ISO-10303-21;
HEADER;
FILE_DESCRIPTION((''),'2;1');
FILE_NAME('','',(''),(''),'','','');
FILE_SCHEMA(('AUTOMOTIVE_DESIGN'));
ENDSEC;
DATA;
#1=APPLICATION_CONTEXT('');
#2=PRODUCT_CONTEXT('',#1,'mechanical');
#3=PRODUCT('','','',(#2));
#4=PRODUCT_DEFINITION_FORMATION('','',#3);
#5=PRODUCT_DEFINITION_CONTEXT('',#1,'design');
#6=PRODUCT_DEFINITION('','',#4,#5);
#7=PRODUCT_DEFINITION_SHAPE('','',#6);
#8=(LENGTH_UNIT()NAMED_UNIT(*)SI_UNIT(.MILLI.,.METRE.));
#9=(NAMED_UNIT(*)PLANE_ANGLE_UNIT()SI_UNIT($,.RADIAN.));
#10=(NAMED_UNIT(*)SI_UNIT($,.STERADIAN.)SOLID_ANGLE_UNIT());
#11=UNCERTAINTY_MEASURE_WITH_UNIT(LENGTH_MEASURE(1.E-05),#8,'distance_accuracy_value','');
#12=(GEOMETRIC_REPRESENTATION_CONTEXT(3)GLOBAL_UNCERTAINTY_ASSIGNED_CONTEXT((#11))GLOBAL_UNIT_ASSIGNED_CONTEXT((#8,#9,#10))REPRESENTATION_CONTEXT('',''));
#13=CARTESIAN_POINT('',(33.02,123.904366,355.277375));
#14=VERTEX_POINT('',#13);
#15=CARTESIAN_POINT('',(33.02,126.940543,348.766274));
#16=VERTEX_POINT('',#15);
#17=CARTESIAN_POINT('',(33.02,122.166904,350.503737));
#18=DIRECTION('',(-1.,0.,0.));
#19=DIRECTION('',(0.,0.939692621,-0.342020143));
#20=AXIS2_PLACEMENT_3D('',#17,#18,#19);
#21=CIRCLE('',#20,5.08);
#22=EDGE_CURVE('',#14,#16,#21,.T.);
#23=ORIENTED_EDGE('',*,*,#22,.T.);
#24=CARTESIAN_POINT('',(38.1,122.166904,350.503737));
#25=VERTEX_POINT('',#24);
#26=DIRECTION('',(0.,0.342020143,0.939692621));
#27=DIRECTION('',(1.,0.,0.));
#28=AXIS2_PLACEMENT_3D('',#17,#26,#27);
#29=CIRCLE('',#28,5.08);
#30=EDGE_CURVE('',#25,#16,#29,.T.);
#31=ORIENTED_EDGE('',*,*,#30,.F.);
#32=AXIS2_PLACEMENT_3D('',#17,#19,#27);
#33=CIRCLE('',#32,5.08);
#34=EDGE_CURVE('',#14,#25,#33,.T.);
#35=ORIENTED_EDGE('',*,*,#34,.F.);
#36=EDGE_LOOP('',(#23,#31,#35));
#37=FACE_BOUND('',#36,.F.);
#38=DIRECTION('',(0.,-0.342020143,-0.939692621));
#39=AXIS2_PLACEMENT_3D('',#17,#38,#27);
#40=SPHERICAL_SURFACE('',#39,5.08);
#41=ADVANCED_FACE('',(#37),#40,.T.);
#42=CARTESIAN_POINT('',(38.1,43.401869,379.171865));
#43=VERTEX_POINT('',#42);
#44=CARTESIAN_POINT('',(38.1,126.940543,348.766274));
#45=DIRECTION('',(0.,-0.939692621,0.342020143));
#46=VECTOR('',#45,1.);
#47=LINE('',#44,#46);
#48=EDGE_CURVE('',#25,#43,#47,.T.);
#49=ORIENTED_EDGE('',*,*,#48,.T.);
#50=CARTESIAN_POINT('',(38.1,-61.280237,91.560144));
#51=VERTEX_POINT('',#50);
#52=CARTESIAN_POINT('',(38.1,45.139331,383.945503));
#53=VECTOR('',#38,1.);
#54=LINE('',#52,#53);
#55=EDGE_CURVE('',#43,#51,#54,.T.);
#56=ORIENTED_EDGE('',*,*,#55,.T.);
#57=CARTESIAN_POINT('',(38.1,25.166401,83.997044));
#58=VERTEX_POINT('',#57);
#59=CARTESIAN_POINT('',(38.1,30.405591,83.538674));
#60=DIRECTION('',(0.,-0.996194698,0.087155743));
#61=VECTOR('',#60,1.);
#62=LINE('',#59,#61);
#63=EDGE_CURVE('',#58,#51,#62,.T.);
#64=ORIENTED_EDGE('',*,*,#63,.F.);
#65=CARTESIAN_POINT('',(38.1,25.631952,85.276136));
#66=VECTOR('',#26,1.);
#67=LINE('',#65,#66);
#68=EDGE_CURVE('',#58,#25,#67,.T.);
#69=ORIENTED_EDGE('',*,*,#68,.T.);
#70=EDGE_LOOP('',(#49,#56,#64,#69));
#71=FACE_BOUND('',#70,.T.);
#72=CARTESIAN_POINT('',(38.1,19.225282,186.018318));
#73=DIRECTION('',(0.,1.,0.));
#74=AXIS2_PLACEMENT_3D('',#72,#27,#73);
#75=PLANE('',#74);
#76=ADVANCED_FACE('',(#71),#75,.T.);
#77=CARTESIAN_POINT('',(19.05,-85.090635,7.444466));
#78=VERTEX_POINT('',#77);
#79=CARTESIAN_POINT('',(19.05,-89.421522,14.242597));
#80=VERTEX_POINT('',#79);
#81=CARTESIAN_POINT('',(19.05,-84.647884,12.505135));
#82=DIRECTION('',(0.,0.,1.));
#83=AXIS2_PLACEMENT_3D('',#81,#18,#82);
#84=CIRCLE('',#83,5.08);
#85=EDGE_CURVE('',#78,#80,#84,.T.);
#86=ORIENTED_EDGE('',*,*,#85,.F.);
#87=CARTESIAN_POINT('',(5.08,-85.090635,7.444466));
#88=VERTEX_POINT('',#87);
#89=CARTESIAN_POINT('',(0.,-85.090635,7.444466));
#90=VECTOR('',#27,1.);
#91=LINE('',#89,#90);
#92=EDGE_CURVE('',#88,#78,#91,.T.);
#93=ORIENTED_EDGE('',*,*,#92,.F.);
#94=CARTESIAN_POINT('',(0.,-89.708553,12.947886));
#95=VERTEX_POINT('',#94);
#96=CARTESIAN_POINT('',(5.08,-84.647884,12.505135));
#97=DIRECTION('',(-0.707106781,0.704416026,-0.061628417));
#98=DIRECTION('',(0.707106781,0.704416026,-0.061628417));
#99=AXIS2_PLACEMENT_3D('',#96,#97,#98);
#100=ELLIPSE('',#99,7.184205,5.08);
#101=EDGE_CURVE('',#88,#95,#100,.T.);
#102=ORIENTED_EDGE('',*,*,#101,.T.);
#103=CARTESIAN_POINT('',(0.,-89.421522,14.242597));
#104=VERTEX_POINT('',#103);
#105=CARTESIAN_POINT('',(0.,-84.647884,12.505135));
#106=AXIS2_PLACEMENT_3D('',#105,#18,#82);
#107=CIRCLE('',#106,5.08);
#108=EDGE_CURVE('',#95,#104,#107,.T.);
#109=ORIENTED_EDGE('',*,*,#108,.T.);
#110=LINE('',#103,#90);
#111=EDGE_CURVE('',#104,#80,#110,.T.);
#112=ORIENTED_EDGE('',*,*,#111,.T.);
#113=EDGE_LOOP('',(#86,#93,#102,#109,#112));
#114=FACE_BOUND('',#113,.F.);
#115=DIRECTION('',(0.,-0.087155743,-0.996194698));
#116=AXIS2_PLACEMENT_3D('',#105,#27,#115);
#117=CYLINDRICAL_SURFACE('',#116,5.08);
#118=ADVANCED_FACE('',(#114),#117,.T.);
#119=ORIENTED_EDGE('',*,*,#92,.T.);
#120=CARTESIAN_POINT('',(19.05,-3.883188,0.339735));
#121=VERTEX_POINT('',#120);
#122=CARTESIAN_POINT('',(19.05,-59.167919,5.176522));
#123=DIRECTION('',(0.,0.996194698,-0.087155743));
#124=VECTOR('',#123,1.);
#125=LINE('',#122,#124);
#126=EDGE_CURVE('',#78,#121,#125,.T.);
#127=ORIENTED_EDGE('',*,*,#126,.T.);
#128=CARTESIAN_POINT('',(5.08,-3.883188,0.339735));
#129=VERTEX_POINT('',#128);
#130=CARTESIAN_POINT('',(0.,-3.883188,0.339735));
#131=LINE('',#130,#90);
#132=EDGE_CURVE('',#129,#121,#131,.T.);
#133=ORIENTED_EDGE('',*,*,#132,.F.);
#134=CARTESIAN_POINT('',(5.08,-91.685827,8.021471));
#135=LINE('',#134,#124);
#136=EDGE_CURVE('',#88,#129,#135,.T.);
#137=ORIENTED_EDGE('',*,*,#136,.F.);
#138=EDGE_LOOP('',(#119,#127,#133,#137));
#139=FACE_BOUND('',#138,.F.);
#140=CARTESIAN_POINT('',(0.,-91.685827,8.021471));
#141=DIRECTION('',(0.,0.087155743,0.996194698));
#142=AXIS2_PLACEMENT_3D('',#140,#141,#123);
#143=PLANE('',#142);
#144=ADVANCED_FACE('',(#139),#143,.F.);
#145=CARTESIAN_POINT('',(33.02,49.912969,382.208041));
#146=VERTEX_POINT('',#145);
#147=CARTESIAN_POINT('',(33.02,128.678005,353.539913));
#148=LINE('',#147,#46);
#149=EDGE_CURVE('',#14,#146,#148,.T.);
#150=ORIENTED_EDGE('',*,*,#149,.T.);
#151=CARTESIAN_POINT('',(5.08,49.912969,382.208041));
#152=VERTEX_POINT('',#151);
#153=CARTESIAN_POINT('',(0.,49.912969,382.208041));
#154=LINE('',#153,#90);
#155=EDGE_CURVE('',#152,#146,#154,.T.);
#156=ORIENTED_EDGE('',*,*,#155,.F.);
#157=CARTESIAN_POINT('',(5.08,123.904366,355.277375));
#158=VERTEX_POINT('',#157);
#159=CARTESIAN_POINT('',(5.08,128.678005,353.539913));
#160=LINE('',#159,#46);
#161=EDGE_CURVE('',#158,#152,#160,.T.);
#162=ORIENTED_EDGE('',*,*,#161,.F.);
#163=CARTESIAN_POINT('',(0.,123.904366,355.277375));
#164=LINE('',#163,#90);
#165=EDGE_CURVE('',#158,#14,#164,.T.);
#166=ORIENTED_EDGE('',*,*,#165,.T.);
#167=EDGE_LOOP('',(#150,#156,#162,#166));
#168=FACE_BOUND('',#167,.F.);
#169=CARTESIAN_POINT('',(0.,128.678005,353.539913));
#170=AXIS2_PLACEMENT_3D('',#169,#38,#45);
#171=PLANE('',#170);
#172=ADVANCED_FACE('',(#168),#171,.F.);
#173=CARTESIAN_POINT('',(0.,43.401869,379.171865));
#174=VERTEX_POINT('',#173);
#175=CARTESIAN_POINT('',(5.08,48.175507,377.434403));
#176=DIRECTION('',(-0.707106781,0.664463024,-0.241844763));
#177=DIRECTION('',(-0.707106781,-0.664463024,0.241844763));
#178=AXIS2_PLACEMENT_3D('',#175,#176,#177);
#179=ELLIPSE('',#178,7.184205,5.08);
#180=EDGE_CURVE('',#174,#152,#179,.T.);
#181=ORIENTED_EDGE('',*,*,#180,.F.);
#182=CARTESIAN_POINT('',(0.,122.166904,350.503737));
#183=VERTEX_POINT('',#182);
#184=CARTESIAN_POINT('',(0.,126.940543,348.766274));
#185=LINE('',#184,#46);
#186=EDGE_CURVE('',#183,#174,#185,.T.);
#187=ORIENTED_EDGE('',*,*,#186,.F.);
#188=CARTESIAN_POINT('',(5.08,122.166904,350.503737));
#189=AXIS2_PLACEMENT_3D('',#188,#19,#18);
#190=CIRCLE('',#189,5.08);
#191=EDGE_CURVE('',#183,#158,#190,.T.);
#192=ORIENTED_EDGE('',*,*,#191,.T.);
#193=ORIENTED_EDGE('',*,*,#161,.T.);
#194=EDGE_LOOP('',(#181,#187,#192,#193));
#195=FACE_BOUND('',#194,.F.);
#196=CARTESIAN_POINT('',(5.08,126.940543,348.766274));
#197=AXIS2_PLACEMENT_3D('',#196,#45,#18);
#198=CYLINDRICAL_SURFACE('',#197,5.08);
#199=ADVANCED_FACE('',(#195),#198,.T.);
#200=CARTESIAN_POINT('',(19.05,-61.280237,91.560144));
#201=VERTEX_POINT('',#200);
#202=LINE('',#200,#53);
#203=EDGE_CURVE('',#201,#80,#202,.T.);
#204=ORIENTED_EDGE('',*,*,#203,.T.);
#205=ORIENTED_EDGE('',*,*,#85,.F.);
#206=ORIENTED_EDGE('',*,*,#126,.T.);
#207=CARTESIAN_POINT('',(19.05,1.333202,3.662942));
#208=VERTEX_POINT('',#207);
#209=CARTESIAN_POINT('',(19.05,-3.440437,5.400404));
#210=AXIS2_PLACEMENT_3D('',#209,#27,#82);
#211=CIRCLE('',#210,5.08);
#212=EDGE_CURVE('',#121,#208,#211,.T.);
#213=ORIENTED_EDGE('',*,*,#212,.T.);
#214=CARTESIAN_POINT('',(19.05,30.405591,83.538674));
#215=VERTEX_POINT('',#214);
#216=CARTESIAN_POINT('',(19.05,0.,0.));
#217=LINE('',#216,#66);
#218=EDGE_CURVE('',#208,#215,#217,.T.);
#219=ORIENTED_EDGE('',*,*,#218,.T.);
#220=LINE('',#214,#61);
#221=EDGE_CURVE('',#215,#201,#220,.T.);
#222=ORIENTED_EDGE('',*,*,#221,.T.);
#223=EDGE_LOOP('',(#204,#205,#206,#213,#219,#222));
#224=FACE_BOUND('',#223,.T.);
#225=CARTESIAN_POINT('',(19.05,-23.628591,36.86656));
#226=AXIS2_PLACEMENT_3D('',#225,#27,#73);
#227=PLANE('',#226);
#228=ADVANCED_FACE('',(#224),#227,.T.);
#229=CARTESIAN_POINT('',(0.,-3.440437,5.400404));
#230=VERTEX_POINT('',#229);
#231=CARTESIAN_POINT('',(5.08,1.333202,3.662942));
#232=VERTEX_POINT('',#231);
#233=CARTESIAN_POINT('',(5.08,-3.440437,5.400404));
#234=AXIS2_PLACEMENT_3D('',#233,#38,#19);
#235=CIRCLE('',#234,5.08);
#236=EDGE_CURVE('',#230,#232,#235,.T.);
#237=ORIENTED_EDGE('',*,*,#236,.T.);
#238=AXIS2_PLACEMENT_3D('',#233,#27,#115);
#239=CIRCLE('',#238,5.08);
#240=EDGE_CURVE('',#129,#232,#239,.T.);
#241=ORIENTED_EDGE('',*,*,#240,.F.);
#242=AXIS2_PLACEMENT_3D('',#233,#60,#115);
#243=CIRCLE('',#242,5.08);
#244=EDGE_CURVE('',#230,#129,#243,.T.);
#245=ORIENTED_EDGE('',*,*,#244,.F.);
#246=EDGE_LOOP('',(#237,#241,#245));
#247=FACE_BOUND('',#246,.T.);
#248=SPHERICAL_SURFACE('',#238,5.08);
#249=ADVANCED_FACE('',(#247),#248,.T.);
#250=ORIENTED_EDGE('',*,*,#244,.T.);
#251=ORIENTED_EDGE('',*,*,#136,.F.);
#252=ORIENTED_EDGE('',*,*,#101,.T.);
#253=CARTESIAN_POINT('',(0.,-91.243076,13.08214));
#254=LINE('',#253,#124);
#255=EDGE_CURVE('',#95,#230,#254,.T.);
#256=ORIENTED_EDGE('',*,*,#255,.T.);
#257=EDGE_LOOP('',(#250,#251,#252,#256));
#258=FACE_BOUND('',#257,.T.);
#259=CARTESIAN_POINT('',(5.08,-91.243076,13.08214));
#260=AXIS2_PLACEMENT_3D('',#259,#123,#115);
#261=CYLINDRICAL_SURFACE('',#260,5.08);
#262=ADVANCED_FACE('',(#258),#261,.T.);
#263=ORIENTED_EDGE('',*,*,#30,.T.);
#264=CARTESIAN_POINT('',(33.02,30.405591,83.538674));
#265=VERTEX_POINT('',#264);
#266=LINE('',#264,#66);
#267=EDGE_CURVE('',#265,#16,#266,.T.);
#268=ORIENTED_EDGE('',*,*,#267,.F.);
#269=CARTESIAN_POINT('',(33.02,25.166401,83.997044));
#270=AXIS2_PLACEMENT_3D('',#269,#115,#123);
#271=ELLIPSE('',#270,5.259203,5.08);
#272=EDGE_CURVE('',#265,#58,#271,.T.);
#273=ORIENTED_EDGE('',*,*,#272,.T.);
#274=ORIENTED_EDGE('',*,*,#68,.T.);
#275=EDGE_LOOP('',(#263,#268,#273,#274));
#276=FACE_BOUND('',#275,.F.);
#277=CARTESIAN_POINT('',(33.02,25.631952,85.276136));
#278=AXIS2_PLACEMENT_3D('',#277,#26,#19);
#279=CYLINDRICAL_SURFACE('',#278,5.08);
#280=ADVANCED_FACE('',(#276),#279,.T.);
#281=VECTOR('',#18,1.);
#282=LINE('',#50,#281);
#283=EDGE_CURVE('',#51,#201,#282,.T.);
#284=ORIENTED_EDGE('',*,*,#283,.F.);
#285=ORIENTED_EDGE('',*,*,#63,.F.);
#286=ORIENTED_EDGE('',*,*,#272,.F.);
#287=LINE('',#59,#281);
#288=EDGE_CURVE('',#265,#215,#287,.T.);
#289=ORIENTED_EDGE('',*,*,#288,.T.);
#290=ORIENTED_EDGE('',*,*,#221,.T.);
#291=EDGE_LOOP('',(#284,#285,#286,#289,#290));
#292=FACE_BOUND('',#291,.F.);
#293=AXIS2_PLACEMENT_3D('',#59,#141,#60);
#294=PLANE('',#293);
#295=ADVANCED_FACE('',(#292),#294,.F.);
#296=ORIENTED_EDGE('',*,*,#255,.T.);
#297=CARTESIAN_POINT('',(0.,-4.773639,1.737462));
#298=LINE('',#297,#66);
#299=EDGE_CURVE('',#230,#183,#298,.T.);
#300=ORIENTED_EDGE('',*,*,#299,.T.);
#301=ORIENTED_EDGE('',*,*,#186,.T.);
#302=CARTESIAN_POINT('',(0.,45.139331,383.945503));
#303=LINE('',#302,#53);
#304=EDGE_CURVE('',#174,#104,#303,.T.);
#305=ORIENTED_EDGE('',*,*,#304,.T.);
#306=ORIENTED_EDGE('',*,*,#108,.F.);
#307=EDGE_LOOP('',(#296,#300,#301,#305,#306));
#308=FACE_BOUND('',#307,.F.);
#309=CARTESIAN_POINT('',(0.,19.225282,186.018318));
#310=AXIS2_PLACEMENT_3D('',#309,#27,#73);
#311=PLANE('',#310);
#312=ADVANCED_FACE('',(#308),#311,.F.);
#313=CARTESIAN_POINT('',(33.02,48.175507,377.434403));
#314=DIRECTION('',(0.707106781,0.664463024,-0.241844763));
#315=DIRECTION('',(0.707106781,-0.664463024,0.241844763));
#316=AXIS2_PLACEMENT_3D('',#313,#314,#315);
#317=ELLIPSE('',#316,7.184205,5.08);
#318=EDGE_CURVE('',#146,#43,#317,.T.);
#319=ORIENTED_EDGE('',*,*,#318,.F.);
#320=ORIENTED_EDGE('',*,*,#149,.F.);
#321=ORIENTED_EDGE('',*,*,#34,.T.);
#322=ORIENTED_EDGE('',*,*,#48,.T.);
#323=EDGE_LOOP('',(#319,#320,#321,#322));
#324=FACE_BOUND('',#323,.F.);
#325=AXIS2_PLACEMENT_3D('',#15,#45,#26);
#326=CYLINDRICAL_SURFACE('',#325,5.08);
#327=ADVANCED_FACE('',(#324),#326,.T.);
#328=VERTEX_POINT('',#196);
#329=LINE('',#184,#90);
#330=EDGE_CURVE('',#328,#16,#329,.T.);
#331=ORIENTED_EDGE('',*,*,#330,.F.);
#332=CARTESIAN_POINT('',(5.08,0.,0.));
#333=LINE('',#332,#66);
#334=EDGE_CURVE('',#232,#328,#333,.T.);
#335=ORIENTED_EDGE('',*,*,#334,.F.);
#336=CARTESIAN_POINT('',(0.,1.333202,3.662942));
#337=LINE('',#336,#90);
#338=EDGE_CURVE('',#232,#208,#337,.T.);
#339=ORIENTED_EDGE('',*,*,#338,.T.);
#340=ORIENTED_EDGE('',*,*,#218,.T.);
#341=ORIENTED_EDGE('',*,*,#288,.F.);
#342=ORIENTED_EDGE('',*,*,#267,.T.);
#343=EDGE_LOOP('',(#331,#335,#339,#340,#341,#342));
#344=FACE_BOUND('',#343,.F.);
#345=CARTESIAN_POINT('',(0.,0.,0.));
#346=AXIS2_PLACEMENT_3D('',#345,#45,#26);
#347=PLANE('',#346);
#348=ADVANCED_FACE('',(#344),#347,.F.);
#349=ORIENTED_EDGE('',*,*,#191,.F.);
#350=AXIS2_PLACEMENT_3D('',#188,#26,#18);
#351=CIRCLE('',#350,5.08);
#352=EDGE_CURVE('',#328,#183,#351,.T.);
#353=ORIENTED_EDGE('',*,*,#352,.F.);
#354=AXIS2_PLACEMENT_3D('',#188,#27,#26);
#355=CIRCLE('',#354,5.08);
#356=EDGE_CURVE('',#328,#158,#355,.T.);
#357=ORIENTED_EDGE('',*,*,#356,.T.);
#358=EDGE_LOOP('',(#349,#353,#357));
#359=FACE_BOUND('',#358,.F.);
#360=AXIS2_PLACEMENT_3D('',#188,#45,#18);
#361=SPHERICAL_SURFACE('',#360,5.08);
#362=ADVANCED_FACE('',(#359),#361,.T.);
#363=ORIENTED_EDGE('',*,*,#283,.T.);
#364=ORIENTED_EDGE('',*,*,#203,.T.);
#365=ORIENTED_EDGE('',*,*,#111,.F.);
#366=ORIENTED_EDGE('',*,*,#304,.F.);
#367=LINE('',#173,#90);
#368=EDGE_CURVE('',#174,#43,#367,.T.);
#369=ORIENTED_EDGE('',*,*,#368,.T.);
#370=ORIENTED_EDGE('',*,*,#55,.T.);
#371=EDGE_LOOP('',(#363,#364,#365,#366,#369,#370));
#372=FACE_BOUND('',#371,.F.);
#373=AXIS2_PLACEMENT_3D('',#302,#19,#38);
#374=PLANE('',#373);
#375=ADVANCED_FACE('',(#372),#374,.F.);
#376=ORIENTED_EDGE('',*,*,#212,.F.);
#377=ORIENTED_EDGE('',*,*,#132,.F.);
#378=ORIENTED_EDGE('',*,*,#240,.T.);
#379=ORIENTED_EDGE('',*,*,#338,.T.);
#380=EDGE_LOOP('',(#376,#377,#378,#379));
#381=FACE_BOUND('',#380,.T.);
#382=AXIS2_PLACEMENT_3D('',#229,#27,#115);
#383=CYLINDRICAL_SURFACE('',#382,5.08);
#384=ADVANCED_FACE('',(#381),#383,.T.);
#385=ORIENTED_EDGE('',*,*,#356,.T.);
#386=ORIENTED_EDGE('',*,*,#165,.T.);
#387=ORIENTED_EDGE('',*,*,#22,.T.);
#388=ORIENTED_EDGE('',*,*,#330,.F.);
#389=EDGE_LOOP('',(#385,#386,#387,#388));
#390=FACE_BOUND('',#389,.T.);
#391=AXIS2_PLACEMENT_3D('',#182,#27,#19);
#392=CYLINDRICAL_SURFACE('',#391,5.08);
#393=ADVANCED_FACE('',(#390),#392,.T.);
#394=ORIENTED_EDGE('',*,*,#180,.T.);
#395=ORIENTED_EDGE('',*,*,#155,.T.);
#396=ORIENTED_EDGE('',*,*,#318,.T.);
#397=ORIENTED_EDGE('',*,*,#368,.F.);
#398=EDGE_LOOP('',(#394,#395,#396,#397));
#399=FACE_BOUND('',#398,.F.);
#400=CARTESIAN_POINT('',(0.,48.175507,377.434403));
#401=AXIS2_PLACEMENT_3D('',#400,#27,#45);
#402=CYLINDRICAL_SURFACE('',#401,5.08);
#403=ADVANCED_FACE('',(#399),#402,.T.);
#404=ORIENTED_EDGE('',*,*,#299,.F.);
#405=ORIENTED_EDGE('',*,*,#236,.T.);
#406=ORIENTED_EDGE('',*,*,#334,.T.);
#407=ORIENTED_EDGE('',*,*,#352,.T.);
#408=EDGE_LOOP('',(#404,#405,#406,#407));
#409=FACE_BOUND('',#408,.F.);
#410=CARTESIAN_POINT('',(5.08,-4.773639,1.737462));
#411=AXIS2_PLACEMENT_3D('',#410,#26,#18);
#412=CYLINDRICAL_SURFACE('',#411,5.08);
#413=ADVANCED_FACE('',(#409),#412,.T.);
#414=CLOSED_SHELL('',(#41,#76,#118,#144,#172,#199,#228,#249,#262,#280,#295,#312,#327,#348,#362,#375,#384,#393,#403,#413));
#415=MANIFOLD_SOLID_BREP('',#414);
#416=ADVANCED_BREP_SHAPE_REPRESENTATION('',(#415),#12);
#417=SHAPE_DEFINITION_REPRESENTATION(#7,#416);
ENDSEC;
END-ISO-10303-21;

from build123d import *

# Parameters (mm, degrees)
F1_DEPTH = 38.1
F3_DEPTH = 19.05
F4_R     = 5.08


# Not quite as in the source:
# - a feature names something its author has since deleted; it is built from what else it names


with BuildPart() as f1:
    # F0 (on Right) → F1 (new body)
    with BuildSketch(Plane.YZ):
        Polygon((-91.6858274725, 8.0214705098), (0, 0), (128.6780048528, 353.5399127136), (45.1393308649, 383.9455034552), align=None)
    extrude(amount=F1_DEPTH)

    # F2 (on face) → F3 (cut)
    with BuildSketch(Plane.YZ.offset(38.1)):
        Polygon((-92.758420577, 5.074545175), (34.3168153471, -6.0430973832), (0, 0), (30.4055907417, 83.5386739879), (-61.2802367308, 91.5601444977), align=None)
    extrude(amount=-F3_DEPTH, mode=Mode.SUBTRACT)

    # F4
    f4_edges = [f1.edges().sort_by_distance(p)[0] for p in [
        (0, 86.908668, 368.742708),
        (0, 64.339002, 176.769956),
        (38.1, 79.541798, 218.539293),
        (9.525, 0, 0),
        (0, -45.842914, 4.010735),
        (9.525, -91.685827, 8.021471),
        (38.1, 86.908668, 368.742708),
        (19.05, 128.678005, 353.539913),
        (19.05, 45.139331, 383.945503),
    ]]
    fillet(f4_edges, radius=F4_R)


solid = f1.part
